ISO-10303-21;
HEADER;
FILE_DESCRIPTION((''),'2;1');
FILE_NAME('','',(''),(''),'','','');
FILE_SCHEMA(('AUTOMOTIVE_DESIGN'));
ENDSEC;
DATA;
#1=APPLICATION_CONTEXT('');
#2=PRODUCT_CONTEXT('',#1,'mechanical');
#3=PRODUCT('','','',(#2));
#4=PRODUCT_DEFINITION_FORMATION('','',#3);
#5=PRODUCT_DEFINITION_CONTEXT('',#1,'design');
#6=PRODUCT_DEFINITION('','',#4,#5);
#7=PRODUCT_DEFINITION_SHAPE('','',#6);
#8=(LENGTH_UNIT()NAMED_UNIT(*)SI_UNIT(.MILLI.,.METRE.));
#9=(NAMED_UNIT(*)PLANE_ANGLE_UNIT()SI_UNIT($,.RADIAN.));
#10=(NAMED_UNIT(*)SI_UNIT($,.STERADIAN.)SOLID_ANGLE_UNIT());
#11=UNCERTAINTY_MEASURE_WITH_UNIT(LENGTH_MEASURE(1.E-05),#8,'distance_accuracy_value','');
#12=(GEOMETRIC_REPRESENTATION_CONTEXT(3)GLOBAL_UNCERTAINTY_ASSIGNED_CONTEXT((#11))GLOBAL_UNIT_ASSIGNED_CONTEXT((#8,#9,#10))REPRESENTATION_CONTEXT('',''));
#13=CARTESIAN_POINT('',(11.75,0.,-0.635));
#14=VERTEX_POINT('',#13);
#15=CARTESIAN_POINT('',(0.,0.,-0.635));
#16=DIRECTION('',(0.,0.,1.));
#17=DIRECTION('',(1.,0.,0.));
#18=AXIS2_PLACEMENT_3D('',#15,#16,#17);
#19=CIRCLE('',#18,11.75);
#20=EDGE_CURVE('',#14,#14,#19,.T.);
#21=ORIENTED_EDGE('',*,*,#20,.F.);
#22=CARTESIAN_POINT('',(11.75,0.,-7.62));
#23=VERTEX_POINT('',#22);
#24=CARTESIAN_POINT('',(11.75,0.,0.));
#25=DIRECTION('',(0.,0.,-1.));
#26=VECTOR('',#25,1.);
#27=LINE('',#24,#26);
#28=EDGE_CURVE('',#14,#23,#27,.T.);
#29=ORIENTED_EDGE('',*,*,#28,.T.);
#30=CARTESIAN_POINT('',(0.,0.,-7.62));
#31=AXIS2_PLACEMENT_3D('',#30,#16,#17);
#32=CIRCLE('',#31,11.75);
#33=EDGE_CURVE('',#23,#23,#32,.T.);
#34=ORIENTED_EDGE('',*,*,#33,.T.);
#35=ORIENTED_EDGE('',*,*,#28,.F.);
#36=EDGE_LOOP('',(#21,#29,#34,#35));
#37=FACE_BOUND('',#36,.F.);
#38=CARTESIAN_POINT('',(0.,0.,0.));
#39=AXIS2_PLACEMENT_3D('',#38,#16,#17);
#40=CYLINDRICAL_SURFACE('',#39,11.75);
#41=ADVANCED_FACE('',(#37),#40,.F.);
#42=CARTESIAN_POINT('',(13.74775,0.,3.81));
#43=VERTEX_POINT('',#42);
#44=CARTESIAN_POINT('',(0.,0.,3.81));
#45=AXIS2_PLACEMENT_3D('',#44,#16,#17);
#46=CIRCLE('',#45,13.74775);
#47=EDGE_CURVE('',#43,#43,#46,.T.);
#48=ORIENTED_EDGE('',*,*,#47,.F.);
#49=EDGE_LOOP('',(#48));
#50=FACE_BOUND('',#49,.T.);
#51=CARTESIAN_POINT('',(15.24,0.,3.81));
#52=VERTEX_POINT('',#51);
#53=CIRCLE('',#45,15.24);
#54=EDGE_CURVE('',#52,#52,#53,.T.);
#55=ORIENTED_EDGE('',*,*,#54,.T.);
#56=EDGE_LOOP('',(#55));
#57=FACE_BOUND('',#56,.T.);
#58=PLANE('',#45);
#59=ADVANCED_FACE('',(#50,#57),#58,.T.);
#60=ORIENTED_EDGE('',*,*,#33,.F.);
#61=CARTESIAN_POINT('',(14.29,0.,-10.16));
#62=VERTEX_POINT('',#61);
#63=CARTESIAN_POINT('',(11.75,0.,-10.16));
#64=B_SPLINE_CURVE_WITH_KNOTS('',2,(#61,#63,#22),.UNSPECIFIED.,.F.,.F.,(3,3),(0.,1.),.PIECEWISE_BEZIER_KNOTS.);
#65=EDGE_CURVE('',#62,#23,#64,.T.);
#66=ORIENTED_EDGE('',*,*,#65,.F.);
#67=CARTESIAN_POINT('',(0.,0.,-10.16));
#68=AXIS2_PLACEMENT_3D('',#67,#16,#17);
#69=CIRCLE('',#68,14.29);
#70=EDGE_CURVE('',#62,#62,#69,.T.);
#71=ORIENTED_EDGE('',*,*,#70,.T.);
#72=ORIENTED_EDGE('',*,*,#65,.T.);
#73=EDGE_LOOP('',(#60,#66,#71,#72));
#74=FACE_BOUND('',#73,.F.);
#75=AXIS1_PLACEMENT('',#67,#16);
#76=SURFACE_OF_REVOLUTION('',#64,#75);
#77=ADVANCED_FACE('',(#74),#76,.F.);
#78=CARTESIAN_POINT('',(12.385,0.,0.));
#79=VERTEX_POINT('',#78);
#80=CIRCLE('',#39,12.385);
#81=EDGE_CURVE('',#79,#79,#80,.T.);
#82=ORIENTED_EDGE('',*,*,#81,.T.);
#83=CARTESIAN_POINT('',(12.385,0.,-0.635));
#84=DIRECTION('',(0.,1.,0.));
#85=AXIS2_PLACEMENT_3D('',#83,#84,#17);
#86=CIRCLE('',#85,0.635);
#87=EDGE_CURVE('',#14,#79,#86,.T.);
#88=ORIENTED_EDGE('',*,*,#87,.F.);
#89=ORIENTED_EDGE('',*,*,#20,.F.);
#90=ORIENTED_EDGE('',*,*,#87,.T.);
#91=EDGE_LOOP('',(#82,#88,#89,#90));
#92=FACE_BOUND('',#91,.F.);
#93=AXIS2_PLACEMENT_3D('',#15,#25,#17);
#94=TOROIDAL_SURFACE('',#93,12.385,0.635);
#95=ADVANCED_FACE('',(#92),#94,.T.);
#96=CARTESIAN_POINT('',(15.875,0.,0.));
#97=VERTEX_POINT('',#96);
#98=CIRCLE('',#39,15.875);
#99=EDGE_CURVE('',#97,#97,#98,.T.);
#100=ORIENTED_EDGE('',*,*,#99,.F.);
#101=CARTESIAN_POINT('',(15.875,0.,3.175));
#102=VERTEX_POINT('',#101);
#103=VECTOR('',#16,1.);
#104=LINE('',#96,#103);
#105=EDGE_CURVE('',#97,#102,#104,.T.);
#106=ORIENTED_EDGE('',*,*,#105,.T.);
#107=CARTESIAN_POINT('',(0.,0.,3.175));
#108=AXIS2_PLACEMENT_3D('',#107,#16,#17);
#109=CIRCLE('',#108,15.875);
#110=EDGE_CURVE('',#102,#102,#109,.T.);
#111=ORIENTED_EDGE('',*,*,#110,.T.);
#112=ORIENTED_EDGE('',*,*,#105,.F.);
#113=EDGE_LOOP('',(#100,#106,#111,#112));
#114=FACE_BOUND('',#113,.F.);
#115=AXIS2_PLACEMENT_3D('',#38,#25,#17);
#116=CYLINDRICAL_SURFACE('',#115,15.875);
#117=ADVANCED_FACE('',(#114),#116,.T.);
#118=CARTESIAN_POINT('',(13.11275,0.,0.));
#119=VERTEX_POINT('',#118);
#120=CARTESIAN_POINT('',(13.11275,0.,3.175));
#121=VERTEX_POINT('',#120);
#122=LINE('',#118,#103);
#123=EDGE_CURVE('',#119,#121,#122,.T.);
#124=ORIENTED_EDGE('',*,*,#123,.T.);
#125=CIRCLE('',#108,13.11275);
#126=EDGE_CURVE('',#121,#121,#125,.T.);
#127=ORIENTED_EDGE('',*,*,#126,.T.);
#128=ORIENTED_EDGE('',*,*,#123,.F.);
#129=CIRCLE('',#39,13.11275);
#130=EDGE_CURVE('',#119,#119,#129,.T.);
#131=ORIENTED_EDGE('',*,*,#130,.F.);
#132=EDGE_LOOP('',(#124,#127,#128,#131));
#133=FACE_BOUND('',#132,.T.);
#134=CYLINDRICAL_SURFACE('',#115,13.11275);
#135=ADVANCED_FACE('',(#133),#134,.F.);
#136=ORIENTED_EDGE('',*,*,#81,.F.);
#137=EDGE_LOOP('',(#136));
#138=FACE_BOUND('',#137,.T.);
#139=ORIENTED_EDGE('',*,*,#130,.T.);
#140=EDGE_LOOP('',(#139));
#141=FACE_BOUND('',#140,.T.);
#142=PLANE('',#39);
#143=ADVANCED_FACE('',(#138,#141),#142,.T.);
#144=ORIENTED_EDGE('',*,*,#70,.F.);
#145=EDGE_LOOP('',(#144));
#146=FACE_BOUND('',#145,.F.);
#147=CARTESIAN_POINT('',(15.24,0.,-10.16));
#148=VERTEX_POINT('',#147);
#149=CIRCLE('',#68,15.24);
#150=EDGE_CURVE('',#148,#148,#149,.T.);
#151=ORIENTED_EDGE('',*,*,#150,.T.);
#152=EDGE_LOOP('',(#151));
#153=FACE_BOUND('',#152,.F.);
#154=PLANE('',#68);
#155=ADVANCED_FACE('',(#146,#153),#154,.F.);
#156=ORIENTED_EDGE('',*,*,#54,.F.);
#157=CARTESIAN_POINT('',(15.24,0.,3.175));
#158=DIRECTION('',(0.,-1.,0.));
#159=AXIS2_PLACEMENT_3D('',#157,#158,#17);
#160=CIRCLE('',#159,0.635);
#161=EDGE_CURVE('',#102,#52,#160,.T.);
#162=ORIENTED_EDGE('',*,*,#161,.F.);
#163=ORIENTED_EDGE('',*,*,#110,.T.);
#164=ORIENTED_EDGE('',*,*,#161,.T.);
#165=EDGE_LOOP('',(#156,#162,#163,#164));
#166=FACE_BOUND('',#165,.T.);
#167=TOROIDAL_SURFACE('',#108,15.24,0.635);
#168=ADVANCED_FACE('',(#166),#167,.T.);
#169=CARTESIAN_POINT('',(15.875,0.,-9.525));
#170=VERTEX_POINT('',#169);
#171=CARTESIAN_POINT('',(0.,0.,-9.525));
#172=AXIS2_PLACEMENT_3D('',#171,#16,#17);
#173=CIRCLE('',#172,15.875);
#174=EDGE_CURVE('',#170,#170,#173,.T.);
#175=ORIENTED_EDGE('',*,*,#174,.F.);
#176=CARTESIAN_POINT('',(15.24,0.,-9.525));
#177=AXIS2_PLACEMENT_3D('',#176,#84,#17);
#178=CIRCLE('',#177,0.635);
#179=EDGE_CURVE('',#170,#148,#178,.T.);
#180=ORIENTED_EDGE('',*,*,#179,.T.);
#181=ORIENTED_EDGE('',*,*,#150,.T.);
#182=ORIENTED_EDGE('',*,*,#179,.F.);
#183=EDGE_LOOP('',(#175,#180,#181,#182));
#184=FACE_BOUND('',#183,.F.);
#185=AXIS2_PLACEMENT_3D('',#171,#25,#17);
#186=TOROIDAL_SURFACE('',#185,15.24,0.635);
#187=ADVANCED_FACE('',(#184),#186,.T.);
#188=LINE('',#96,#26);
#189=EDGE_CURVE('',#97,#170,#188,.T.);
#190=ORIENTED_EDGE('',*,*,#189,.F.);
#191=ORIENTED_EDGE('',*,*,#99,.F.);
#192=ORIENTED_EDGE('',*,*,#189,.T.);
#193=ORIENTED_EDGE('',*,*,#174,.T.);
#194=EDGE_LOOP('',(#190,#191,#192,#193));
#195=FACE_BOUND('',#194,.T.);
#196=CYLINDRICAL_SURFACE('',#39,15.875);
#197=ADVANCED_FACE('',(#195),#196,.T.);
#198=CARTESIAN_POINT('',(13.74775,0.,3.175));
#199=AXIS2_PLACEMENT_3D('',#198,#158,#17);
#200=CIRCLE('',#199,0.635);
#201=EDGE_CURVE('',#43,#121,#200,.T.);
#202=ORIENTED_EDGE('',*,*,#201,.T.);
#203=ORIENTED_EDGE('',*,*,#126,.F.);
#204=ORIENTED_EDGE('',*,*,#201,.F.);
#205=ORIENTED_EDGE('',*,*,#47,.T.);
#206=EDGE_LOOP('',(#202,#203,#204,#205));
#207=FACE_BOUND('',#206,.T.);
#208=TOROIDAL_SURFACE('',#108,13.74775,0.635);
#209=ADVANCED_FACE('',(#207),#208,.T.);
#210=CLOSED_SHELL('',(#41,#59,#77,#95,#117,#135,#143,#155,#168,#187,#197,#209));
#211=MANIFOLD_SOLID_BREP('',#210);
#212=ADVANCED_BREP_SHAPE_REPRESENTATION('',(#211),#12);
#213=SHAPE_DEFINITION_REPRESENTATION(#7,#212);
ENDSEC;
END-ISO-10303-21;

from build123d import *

# Parameters (mm, degrees)
F0_R     = 15.875
F0_R_2   = 13.11275
F0_R_3   = 11.75
F1_DEPTH = 10.16
F2_DEPTH = 3.81
F3_R     = 0.635


# Not quite as in the source:
# - a fillet or chamfer that OpenCascade refuses, or shapes differently, is made with other operations: its cross-section is extruded or revolved along the edge and cut away or added


with BuildPart() as f1:
    # F0 (on Top) → F1 (new body)
    with BuildSketch(Plane.XY):
        Circle(F0_R)
        Circle(F0_R_2, mode=Mode.SUBTRACT)
        Circle(F0_R_2)
        Circle(F0_R_3, mode=Mode.SUBTRACT)
    extrude(amount=-F1_DEPTH)

    # F0 (on Top) → F2 (join)
    with BuildSketch(Plane.XY):
        Circle(F0_R)
        Circle(F0_R_2, mode=Mode.SUBTRACT)
    extrude(amount=F2_DEPTH)

    # F3
    f3_edges = [f1.edges().sort_by_distance(p)[0] for p in [
        (-13.11275, 0, 3.81),
        (-15.875, 0, 3.81),
        (-15.875, 0, -10.16),
        (-11.75, 0, 0),
    ]]
    fillet(f3_edges, radius=F3_R)

    # F4: fillet of radius 2.54 on 1 edges, made by hand

    # F4_s1 → F4_t2 (revolve, cut)
    with BuildSketch(Plane.XZ):
        with BuildLine():
            add(Edge.make_bspline(
                [(14.29, -10.16), (11.75, -10.16), (11.75, -7.62)],
                knots=[0, 0, 0, 1, 1, 1], degree=2, weights=[1, 1, 1]))
            Line((11.75, -7.62), (11.75, -10.16))
            Line((11.75, -10.16), (14.29, -10.16))
        make_face()
    revolve(axis=Axis((0, 0, -10.16), (0, 0, 1)), mode=Mode.SUBTRACT)


solid = f1.part
